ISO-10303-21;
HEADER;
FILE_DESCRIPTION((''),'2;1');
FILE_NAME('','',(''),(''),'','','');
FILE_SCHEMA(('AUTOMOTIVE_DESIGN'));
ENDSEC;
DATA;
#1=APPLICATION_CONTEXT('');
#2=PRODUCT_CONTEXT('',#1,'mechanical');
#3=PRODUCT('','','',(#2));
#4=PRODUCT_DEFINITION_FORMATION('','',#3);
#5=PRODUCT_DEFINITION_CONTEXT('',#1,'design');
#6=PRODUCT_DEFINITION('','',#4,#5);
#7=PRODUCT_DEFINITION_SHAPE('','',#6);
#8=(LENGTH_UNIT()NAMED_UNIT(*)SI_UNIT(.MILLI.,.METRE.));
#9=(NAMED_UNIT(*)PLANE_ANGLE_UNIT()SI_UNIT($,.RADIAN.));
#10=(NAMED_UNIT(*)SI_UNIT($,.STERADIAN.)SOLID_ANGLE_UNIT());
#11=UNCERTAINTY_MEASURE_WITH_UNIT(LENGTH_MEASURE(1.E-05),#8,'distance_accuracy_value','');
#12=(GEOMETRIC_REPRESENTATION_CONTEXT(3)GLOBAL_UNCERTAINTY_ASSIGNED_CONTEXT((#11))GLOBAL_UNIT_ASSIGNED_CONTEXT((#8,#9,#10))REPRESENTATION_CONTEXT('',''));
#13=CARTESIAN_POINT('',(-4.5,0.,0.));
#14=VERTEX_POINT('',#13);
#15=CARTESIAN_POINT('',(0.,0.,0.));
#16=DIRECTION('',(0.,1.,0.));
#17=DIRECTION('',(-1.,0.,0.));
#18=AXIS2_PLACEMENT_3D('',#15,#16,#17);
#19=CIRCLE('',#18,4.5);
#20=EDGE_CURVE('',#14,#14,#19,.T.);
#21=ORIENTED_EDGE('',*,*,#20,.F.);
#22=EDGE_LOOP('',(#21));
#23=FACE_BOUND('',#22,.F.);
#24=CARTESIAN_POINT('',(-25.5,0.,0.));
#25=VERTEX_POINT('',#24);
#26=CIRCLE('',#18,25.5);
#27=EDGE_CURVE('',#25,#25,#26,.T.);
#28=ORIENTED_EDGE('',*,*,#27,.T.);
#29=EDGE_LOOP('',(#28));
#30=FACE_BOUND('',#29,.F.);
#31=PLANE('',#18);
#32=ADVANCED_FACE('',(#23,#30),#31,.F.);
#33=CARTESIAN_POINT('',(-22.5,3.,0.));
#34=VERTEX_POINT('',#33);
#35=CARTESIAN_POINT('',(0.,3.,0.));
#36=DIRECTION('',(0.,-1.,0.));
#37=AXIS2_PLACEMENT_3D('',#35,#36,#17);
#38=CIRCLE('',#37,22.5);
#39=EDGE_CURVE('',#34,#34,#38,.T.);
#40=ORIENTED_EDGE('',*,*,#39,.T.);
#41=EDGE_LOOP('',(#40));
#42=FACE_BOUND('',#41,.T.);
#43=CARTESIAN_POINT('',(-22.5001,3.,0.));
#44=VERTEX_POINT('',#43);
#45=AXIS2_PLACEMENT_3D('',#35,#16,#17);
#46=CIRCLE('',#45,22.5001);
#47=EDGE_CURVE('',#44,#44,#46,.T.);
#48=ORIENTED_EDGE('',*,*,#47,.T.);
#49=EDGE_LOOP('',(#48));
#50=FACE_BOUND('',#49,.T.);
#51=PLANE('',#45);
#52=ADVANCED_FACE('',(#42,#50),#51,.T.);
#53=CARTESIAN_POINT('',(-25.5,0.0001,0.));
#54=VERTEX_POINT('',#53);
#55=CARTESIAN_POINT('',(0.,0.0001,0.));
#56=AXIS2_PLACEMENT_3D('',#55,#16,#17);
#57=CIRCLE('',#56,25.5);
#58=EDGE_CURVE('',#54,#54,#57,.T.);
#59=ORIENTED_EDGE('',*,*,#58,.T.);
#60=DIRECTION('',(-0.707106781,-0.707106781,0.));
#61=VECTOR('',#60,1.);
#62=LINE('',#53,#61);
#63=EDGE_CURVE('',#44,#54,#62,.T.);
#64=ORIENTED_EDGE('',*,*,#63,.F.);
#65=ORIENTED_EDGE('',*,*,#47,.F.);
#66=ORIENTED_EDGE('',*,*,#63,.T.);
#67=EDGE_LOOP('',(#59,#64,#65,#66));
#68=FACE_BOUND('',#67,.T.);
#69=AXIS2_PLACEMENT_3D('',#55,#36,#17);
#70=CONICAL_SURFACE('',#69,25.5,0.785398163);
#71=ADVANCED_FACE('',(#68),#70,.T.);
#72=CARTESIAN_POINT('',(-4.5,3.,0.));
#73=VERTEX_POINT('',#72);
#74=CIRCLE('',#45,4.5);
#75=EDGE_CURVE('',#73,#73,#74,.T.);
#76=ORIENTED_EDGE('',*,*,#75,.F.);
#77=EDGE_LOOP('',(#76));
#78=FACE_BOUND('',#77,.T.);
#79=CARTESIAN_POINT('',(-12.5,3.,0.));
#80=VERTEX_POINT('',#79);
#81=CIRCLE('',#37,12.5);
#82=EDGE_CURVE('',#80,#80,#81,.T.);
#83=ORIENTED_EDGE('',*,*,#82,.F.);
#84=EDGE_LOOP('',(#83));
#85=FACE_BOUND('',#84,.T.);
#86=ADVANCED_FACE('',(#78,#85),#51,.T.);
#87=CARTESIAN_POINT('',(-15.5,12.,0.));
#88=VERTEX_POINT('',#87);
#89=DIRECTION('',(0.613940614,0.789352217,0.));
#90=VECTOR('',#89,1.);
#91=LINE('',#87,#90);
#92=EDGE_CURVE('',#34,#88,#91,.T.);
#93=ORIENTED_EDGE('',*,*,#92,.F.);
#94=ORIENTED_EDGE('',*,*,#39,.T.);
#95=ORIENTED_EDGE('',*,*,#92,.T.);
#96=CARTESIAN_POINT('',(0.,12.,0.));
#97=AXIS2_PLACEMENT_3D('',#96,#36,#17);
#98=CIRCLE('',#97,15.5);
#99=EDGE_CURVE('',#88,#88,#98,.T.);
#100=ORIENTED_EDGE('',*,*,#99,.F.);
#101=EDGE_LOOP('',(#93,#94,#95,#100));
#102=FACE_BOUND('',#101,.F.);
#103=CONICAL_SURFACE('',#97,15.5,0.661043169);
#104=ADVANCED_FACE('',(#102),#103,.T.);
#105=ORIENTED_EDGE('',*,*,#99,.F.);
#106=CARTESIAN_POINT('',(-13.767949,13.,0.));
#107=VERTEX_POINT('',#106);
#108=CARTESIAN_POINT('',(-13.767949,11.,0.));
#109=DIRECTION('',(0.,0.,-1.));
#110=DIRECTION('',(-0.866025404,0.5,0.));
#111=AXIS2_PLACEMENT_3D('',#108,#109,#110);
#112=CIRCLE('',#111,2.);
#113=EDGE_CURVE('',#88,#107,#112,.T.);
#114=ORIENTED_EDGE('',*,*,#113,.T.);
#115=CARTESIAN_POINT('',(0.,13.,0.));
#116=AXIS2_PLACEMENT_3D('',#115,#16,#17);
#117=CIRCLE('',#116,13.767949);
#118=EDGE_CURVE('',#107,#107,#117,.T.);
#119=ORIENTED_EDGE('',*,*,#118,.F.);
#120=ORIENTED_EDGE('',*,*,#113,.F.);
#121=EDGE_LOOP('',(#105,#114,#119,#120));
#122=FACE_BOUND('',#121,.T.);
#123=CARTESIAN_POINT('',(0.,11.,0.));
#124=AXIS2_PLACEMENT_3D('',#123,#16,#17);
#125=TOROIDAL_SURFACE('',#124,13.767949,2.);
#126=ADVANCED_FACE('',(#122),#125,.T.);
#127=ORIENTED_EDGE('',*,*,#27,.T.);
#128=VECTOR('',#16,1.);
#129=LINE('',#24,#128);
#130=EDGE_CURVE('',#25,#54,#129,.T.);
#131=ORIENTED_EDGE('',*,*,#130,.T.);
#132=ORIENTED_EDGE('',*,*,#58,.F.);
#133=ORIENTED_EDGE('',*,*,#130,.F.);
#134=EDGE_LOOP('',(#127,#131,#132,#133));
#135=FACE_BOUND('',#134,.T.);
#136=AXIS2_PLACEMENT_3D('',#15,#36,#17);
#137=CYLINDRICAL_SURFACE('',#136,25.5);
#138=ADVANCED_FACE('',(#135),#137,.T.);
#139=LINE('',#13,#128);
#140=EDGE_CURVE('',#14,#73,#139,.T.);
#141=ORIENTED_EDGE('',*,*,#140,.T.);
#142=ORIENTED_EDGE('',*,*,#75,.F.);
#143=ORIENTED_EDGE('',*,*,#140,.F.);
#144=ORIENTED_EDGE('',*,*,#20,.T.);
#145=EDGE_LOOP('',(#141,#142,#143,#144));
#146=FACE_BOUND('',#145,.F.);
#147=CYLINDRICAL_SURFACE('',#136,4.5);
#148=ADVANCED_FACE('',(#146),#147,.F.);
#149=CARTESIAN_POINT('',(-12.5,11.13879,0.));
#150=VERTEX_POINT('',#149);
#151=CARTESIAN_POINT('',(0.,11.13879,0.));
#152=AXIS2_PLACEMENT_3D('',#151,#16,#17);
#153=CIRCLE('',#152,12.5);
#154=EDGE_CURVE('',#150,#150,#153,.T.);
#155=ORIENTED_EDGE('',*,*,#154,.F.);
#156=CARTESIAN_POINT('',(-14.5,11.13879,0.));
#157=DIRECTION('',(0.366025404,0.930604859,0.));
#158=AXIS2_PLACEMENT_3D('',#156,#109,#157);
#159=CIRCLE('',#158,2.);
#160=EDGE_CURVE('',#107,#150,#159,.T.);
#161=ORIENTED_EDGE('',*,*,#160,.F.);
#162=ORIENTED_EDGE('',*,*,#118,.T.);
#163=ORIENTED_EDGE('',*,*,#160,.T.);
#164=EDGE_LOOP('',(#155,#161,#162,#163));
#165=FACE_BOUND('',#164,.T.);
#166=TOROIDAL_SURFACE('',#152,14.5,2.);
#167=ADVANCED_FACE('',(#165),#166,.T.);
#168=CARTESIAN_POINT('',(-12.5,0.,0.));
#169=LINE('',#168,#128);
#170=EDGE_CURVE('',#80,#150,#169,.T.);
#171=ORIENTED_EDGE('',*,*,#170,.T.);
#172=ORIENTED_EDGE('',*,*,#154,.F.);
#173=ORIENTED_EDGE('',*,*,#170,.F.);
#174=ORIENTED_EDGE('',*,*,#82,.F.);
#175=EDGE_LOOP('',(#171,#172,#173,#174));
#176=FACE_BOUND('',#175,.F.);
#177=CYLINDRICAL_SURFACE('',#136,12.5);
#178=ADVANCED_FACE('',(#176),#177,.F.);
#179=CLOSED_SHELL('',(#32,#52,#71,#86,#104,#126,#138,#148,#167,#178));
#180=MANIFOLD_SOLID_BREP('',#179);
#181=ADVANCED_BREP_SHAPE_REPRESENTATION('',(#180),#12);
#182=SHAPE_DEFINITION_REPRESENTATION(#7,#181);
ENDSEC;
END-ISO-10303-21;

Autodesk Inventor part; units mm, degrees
ref_plane "YZ Plane" through (0, 0, 0) normal (1, 0, 0) x (0, 1, 0)
ref_plane "XZ Plane" through (0, 0, 0) normal (0, 1, 0) x (-1, 0, 0)
ref_plane "XY Plane" through (0, 0, 0) normal (0, 0, 1) x (1, 0, 0)
sketch "Sketch1" plane through (0, 0, 0) normal (0, 1, 0) x (-1, 0, 0)
  circle A0 centre (0, 0) radius 12.5
  circle A1 centre (0, 0) radius 15.5
  circle A2 centre (0, 0) radius 25.5
  circle A3 centre (0, 0) radius 4.5
  dimension "d0" = 25
  dimension "d1" = 31
  dimension "d2" = 51
  dimension "d3" = 9
extrude "Extrusion1" add sketch "Sketch1" along normal blind 3 contours A0 | A1 | A2
chamfer "Chamfer1" distance 3 angle 45 1 edges at (25.5, 3, 0)
extrude "Extrusion2" add sketch "Sketch1" along normal blind 13 contours A1
chamfer "Chamfer2" distance 7 distance2 9 1 edges at (15.5, 3, 0) measured on face at (-19.7987, 3, -3.0313)
fillet "Fillet1" radius 2 2 edges at (15.5, 13, 0) (12.5, 13, 0)
properties part number "boltCap"
